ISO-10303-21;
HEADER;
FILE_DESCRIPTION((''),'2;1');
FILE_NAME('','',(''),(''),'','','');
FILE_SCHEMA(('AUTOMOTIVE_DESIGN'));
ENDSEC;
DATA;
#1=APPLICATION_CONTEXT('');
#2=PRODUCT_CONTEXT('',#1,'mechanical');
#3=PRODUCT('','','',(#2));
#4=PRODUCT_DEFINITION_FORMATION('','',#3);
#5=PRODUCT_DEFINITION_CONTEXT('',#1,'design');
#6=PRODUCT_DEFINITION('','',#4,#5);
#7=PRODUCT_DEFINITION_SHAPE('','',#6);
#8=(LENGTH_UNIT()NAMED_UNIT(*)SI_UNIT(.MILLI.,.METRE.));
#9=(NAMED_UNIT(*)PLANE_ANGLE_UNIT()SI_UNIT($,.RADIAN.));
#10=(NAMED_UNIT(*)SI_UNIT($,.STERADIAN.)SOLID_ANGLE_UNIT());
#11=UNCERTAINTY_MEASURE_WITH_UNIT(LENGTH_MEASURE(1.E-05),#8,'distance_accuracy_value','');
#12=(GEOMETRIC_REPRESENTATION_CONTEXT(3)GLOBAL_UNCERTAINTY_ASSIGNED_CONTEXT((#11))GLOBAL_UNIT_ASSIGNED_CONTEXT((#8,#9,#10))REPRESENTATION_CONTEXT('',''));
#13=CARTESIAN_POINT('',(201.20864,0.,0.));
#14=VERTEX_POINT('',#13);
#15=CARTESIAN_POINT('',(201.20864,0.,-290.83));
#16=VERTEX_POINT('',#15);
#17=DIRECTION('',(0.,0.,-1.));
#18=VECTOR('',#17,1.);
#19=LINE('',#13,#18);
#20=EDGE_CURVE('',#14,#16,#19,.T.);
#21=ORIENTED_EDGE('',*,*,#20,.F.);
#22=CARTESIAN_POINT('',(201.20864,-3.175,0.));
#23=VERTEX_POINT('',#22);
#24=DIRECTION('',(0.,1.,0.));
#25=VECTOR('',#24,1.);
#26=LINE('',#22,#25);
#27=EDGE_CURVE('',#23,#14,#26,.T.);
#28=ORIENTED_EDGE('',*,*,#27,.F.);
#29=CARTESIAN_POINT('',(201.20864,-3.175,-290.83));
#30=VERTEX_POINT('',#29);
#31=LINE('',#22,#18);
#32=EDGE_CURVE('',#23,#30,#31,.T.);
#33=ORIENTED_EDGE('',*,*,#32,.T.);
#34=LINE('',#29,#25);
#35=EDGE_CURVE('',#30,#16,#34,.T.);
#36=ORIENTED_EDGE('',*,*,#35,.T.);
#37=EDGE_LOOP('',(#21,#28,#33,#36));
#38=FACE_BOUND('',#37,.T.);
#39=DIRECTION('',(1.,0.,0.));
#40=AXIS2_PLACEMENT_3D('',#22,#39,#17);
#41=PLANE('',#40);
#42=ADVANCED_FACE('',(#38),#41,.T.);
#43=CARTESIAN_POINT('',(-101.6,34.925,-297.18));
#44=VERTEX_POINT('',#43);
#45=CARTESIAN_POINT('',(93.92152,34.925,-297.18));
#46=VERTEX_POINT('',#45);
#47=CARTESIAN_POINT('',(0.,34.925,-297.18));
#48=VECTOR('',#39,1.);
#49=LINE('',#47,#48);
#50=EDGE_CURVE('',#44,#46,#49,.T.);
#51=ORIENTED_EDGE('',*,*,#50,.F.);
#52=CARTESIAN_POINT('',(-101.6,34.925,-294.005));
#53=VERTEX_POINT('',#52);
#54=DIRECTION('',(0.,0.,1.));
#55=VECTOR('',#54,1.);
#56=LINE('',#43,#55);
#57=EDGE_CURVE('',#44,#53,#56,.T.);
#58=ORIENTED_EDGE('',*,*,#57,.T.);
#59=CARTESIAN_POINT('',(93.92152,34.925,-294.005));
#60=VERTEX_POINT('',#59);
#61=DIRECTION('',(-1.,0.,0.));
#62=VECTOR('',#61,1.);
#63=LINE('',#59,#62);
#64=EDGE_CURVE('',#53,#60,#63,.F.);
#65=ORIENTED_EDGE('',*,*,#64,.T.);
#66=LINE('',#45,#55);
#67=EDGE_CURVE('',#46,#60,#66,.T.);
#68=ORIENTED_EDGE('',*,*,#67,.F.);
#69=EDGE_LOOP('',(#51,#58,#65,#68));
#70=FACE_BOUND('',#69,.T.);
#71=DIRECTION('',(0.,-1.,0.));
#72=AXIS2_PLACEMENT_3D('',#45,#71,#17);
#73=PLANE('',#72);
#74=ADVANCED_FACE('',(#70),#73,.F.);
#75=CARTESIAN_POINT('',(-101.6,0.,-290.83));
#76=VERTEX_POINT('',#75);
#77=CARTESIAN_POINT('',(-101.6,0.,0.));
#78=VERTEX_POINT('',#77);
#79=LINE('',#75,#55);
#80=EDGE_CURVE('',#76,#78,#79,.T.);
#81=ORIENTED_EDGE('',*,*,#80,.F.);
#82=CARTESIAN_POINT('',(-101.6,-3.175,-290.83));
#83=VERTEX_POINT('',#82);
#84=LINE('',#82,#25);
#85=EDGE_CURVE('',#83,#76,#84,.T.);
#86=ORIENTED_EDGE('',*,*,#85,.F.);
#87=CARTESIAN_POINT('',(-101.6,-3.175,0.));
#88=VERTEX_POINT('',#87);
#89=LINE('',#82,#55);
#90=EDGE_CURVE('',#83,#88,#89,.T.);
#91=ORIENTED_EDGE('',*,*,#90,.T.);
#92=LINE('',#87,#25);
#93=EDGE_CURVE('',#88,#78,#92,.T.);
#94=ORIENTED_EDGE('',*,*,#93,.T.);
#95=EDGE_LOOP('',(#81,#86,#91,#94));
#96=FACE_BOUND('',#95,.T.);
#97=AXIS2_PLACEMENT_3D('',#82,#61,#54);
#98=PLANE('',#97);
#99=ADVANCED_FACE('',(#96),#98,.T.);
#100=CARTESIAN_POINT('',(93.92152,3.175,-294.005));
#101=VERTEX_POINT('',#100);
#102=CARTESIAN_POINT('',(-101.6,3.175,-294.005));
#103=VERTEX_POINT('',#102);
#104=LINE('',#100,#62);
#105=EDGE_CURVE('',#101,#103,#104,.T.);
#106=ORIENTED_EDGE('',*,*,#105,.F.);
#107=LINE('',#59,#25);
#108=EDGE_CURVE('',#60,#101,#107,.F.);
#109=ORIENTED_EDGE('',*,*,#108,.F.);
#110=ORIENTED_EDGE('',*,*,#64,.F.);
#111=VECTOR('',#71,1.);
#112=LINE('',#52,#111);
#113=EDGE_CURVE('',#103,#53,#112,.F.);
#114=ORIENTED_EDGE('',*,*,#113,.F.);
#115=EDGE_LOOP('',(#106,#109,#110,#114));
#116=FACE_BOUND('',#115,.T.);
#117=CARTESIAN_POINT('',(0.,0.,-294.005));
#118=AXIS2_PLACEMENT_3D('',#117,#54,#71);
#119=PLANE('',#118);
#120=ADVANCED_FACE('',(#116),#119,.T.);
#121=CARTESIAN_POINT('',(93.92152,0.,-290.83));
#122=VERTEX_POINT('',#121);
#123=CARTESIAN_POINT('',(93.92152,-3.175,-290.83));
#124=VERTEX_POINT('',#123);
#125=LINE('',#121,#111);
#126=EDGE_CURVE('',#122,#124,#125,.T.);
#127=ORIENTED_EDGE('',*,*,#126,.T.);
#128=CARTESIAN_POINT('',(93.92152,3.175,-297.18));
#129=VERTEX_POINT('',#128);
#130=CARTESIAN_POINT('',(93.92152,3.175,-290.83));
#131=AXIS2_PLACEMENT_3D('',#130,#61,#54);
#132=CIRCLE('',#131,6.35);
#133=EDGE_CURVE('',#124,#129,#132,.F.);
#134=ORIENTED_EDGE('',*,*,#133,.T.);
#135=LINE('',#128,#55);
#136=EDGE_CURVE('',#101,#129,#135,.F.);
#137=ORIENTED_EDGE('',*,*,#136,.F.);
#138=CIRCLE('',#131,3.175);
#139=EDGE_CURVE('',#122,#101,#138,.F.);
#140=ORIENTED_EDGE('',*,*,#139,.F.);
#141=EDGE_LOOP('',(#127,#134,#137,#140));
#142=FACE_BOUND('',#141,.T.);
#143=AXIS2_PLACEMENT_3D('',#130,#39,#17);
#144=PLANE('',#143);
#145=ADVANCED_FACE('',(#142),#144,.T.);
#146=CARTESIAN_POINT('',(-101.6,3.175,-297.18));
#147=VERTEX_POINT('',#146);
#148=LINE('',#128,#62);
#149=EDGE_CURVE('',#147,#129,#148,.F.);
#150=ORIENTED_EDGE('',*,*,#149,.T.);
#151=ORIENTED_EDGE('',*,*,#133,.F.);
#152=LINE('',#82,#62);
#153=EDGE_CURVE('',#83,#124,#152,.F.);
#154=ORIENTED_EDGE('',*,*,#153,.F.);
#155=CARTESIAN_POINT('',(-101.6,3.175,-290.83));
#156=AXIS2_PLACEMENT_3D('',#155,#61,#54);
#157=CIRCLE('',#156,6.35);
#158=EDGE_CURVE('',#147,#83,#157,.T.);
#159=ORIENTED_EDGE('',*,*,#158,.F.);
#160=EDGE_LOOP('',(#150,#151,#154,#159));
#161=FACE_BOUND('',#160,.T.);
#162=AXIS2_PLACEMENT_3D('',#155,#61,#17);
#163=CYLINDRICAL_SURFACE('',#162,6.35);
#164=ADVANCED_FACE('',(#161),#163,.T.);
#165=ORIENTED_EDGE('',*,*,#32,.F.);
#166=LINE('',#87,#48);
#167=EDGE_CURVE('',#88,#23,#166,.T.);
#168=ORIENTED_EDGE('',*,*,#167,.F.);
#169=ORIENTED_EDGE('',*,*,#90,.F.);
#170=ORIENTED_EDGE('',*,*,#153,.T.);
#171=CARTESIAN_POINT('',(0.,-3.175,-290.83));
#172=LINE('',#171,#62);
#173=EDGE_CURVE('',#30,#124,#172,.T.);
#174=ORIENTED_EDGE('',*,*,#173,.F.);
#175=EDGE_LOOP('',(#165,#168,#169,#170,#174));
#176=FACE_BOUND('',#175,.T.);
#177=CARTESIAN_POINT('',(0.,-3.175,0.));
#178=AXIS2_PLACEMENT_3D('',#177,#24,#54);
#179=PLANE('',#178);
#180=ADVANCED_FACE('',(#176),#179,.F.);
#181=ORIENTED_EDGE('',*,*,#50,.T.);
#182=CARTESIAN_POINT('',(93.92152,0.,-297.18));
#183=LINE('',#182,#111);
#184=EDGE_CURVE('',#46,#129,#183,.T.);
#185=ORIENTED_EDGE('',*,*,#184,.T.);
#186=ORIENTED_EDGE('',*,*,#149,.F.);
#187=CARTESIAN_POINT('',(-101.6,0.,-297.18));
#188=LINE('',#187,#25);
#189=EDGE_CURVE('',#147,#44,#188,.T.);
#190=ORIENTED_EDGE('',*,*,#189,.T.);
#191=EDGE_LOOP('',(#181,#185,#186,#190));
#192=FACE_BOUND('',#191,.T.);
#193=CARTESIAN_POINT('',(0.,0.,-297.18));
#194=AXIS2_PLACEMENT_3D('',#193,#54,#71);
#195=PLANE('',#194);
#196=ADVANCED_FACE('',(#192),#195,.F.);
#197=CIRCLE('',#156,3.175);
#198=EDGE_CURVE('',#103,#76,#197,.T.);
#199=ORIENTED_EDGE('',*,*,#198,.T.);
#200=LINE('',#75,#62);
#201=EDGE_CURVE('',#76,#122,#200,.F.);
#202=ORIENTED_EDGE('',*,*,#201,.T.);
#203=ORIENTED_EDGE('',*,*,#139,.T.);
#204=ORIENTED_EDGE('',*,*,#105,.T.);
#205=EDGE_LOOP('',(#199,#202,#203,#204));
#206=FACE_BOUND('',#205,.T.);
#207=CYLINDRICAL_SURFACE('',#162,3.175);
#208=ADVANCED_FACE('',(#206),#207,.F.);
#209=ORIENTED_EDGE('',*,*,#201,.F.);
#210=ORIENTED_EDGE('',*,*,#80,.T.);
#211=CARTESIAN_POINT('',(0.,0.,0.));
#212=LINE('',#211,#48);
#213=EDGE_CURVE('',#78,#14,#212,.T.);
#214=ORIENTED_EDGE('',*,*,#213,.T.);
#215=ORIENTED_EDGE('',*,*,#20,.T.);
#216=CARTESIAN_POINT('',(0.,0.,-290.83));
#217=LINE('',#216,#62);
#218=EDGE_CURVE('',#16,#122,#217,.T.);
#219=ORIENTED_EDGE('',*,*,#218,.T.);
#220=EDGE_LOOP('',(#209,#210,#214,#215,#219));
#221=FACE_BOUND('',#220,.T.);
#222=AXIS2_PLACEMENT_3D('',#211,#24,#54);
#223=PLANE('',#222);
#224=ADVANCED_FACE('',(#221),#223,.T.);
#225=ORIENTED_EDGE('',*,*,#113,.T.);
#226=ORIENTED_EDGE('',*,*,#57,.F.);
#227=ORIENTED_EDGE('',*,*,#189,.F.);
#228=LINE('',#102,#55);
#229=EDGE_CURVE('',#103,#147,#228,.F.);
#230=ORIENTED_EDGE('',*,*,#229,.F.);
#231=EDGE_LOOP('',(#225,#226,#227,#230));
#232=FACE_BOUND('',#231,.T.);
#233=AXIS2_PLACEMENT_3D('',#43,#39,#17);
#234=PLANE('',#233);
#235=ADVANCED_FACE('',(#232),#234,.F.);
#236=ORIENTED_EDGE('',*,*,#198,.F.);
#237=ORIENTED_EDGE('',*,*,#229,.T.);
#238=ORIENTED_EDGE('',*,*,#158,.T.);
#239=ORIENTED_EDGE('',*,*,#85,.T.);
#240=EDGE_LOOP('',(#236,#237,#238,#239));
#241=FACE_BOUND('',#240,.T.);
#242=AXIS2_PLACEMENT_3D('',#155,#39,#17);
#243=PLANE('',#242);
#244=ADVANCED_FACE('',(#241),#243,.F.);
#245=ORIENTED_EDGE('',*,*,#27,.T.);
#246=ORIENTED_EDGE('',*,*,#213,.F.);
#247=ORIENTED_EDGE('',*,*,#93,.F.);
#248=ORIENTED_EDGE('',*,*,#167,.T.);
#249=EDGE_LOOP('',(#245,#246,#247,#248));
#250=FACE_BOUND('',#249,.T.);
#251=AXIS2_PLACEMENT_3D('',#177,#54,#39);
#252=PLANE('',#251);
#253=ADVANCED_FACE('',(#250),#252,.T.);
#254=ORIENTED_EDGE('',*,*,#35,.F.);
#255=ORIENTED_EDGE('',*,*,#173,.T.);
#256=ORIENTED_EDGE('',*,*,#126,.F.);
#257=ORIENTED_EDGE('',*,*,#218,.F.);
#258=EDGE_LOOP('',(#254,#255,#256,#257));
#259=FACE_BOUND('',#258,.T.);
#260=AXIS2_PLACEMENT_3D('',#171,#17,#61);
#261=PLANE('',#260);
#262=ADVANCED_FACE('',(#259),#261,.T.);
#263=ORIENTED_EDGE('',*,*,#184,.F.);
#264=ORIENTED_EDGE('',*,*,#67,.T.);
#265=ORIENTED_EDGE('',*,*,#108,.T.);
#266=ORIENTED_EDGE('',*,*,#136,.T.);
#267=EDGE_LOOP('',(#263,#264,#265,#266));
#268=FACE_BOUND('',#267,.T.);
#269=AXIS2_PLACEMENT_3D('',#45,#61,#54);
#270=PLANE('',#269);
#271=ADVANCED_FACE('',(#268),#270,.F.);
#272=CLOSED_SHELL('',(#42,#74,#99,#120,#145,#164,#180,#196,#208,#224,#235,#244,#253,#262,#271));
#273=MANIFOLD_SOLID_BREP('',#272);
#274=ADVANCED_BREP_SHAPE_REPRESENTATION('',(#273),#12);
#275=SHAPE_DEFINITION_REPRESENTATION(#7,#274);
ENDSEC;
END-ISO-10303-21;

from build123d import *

# Parameters (mm, degrees)
BASE_FLANGE1_DEPTH = 3.175
EDGE_FLANGE1_DEPTH = 195.521520056


# Sheet-metal steps are written as plain solids
with BuildPart() as part:
    # Sketch1 → Base-Flange1 (new body)
    with BuildSketch(Plane(origin=(0, 0, 0), x_dir=(1, 0, 0), z_dir=(0, 1, 0))):
        Polygon((0, 290.83), (-101.6, 290.83), (-101.6, 0), (0, 0), (201.20864, 0), (201.20864, 290.83), align=None)
    extrude(amount=-BASE_FLANGE1_DEPTH)

    # Edge-Flange1 section (across the edge) → Edge-Flange1 (add)
    with BuildSketch(Plane(origin=(93.921520056, 0, -294.005), x_dir=(0, 0, 1), z_dir=(-1, 0, 0))):
        with BuildLine():
            Line((-3.175, 3.175), (-3.175, 34.925))
            Line((-3.175, 34.925), (0, 34.925))
            Line((0, 34.925), (0, 3.175))
            ThreePointArc((0, 3.175), (0.92993597, 0.92993597), (3.175, 0))
            Line((3.175, 0), (3.175, -3.175))
            ThreePointArc((3.175, -3.175), (-1.315128061, -1.315128061), (-3.175, 3.175))
        make_face()
    extrude(amount=EDGE_FLANGE1_DEPTH)


solid = part.part
